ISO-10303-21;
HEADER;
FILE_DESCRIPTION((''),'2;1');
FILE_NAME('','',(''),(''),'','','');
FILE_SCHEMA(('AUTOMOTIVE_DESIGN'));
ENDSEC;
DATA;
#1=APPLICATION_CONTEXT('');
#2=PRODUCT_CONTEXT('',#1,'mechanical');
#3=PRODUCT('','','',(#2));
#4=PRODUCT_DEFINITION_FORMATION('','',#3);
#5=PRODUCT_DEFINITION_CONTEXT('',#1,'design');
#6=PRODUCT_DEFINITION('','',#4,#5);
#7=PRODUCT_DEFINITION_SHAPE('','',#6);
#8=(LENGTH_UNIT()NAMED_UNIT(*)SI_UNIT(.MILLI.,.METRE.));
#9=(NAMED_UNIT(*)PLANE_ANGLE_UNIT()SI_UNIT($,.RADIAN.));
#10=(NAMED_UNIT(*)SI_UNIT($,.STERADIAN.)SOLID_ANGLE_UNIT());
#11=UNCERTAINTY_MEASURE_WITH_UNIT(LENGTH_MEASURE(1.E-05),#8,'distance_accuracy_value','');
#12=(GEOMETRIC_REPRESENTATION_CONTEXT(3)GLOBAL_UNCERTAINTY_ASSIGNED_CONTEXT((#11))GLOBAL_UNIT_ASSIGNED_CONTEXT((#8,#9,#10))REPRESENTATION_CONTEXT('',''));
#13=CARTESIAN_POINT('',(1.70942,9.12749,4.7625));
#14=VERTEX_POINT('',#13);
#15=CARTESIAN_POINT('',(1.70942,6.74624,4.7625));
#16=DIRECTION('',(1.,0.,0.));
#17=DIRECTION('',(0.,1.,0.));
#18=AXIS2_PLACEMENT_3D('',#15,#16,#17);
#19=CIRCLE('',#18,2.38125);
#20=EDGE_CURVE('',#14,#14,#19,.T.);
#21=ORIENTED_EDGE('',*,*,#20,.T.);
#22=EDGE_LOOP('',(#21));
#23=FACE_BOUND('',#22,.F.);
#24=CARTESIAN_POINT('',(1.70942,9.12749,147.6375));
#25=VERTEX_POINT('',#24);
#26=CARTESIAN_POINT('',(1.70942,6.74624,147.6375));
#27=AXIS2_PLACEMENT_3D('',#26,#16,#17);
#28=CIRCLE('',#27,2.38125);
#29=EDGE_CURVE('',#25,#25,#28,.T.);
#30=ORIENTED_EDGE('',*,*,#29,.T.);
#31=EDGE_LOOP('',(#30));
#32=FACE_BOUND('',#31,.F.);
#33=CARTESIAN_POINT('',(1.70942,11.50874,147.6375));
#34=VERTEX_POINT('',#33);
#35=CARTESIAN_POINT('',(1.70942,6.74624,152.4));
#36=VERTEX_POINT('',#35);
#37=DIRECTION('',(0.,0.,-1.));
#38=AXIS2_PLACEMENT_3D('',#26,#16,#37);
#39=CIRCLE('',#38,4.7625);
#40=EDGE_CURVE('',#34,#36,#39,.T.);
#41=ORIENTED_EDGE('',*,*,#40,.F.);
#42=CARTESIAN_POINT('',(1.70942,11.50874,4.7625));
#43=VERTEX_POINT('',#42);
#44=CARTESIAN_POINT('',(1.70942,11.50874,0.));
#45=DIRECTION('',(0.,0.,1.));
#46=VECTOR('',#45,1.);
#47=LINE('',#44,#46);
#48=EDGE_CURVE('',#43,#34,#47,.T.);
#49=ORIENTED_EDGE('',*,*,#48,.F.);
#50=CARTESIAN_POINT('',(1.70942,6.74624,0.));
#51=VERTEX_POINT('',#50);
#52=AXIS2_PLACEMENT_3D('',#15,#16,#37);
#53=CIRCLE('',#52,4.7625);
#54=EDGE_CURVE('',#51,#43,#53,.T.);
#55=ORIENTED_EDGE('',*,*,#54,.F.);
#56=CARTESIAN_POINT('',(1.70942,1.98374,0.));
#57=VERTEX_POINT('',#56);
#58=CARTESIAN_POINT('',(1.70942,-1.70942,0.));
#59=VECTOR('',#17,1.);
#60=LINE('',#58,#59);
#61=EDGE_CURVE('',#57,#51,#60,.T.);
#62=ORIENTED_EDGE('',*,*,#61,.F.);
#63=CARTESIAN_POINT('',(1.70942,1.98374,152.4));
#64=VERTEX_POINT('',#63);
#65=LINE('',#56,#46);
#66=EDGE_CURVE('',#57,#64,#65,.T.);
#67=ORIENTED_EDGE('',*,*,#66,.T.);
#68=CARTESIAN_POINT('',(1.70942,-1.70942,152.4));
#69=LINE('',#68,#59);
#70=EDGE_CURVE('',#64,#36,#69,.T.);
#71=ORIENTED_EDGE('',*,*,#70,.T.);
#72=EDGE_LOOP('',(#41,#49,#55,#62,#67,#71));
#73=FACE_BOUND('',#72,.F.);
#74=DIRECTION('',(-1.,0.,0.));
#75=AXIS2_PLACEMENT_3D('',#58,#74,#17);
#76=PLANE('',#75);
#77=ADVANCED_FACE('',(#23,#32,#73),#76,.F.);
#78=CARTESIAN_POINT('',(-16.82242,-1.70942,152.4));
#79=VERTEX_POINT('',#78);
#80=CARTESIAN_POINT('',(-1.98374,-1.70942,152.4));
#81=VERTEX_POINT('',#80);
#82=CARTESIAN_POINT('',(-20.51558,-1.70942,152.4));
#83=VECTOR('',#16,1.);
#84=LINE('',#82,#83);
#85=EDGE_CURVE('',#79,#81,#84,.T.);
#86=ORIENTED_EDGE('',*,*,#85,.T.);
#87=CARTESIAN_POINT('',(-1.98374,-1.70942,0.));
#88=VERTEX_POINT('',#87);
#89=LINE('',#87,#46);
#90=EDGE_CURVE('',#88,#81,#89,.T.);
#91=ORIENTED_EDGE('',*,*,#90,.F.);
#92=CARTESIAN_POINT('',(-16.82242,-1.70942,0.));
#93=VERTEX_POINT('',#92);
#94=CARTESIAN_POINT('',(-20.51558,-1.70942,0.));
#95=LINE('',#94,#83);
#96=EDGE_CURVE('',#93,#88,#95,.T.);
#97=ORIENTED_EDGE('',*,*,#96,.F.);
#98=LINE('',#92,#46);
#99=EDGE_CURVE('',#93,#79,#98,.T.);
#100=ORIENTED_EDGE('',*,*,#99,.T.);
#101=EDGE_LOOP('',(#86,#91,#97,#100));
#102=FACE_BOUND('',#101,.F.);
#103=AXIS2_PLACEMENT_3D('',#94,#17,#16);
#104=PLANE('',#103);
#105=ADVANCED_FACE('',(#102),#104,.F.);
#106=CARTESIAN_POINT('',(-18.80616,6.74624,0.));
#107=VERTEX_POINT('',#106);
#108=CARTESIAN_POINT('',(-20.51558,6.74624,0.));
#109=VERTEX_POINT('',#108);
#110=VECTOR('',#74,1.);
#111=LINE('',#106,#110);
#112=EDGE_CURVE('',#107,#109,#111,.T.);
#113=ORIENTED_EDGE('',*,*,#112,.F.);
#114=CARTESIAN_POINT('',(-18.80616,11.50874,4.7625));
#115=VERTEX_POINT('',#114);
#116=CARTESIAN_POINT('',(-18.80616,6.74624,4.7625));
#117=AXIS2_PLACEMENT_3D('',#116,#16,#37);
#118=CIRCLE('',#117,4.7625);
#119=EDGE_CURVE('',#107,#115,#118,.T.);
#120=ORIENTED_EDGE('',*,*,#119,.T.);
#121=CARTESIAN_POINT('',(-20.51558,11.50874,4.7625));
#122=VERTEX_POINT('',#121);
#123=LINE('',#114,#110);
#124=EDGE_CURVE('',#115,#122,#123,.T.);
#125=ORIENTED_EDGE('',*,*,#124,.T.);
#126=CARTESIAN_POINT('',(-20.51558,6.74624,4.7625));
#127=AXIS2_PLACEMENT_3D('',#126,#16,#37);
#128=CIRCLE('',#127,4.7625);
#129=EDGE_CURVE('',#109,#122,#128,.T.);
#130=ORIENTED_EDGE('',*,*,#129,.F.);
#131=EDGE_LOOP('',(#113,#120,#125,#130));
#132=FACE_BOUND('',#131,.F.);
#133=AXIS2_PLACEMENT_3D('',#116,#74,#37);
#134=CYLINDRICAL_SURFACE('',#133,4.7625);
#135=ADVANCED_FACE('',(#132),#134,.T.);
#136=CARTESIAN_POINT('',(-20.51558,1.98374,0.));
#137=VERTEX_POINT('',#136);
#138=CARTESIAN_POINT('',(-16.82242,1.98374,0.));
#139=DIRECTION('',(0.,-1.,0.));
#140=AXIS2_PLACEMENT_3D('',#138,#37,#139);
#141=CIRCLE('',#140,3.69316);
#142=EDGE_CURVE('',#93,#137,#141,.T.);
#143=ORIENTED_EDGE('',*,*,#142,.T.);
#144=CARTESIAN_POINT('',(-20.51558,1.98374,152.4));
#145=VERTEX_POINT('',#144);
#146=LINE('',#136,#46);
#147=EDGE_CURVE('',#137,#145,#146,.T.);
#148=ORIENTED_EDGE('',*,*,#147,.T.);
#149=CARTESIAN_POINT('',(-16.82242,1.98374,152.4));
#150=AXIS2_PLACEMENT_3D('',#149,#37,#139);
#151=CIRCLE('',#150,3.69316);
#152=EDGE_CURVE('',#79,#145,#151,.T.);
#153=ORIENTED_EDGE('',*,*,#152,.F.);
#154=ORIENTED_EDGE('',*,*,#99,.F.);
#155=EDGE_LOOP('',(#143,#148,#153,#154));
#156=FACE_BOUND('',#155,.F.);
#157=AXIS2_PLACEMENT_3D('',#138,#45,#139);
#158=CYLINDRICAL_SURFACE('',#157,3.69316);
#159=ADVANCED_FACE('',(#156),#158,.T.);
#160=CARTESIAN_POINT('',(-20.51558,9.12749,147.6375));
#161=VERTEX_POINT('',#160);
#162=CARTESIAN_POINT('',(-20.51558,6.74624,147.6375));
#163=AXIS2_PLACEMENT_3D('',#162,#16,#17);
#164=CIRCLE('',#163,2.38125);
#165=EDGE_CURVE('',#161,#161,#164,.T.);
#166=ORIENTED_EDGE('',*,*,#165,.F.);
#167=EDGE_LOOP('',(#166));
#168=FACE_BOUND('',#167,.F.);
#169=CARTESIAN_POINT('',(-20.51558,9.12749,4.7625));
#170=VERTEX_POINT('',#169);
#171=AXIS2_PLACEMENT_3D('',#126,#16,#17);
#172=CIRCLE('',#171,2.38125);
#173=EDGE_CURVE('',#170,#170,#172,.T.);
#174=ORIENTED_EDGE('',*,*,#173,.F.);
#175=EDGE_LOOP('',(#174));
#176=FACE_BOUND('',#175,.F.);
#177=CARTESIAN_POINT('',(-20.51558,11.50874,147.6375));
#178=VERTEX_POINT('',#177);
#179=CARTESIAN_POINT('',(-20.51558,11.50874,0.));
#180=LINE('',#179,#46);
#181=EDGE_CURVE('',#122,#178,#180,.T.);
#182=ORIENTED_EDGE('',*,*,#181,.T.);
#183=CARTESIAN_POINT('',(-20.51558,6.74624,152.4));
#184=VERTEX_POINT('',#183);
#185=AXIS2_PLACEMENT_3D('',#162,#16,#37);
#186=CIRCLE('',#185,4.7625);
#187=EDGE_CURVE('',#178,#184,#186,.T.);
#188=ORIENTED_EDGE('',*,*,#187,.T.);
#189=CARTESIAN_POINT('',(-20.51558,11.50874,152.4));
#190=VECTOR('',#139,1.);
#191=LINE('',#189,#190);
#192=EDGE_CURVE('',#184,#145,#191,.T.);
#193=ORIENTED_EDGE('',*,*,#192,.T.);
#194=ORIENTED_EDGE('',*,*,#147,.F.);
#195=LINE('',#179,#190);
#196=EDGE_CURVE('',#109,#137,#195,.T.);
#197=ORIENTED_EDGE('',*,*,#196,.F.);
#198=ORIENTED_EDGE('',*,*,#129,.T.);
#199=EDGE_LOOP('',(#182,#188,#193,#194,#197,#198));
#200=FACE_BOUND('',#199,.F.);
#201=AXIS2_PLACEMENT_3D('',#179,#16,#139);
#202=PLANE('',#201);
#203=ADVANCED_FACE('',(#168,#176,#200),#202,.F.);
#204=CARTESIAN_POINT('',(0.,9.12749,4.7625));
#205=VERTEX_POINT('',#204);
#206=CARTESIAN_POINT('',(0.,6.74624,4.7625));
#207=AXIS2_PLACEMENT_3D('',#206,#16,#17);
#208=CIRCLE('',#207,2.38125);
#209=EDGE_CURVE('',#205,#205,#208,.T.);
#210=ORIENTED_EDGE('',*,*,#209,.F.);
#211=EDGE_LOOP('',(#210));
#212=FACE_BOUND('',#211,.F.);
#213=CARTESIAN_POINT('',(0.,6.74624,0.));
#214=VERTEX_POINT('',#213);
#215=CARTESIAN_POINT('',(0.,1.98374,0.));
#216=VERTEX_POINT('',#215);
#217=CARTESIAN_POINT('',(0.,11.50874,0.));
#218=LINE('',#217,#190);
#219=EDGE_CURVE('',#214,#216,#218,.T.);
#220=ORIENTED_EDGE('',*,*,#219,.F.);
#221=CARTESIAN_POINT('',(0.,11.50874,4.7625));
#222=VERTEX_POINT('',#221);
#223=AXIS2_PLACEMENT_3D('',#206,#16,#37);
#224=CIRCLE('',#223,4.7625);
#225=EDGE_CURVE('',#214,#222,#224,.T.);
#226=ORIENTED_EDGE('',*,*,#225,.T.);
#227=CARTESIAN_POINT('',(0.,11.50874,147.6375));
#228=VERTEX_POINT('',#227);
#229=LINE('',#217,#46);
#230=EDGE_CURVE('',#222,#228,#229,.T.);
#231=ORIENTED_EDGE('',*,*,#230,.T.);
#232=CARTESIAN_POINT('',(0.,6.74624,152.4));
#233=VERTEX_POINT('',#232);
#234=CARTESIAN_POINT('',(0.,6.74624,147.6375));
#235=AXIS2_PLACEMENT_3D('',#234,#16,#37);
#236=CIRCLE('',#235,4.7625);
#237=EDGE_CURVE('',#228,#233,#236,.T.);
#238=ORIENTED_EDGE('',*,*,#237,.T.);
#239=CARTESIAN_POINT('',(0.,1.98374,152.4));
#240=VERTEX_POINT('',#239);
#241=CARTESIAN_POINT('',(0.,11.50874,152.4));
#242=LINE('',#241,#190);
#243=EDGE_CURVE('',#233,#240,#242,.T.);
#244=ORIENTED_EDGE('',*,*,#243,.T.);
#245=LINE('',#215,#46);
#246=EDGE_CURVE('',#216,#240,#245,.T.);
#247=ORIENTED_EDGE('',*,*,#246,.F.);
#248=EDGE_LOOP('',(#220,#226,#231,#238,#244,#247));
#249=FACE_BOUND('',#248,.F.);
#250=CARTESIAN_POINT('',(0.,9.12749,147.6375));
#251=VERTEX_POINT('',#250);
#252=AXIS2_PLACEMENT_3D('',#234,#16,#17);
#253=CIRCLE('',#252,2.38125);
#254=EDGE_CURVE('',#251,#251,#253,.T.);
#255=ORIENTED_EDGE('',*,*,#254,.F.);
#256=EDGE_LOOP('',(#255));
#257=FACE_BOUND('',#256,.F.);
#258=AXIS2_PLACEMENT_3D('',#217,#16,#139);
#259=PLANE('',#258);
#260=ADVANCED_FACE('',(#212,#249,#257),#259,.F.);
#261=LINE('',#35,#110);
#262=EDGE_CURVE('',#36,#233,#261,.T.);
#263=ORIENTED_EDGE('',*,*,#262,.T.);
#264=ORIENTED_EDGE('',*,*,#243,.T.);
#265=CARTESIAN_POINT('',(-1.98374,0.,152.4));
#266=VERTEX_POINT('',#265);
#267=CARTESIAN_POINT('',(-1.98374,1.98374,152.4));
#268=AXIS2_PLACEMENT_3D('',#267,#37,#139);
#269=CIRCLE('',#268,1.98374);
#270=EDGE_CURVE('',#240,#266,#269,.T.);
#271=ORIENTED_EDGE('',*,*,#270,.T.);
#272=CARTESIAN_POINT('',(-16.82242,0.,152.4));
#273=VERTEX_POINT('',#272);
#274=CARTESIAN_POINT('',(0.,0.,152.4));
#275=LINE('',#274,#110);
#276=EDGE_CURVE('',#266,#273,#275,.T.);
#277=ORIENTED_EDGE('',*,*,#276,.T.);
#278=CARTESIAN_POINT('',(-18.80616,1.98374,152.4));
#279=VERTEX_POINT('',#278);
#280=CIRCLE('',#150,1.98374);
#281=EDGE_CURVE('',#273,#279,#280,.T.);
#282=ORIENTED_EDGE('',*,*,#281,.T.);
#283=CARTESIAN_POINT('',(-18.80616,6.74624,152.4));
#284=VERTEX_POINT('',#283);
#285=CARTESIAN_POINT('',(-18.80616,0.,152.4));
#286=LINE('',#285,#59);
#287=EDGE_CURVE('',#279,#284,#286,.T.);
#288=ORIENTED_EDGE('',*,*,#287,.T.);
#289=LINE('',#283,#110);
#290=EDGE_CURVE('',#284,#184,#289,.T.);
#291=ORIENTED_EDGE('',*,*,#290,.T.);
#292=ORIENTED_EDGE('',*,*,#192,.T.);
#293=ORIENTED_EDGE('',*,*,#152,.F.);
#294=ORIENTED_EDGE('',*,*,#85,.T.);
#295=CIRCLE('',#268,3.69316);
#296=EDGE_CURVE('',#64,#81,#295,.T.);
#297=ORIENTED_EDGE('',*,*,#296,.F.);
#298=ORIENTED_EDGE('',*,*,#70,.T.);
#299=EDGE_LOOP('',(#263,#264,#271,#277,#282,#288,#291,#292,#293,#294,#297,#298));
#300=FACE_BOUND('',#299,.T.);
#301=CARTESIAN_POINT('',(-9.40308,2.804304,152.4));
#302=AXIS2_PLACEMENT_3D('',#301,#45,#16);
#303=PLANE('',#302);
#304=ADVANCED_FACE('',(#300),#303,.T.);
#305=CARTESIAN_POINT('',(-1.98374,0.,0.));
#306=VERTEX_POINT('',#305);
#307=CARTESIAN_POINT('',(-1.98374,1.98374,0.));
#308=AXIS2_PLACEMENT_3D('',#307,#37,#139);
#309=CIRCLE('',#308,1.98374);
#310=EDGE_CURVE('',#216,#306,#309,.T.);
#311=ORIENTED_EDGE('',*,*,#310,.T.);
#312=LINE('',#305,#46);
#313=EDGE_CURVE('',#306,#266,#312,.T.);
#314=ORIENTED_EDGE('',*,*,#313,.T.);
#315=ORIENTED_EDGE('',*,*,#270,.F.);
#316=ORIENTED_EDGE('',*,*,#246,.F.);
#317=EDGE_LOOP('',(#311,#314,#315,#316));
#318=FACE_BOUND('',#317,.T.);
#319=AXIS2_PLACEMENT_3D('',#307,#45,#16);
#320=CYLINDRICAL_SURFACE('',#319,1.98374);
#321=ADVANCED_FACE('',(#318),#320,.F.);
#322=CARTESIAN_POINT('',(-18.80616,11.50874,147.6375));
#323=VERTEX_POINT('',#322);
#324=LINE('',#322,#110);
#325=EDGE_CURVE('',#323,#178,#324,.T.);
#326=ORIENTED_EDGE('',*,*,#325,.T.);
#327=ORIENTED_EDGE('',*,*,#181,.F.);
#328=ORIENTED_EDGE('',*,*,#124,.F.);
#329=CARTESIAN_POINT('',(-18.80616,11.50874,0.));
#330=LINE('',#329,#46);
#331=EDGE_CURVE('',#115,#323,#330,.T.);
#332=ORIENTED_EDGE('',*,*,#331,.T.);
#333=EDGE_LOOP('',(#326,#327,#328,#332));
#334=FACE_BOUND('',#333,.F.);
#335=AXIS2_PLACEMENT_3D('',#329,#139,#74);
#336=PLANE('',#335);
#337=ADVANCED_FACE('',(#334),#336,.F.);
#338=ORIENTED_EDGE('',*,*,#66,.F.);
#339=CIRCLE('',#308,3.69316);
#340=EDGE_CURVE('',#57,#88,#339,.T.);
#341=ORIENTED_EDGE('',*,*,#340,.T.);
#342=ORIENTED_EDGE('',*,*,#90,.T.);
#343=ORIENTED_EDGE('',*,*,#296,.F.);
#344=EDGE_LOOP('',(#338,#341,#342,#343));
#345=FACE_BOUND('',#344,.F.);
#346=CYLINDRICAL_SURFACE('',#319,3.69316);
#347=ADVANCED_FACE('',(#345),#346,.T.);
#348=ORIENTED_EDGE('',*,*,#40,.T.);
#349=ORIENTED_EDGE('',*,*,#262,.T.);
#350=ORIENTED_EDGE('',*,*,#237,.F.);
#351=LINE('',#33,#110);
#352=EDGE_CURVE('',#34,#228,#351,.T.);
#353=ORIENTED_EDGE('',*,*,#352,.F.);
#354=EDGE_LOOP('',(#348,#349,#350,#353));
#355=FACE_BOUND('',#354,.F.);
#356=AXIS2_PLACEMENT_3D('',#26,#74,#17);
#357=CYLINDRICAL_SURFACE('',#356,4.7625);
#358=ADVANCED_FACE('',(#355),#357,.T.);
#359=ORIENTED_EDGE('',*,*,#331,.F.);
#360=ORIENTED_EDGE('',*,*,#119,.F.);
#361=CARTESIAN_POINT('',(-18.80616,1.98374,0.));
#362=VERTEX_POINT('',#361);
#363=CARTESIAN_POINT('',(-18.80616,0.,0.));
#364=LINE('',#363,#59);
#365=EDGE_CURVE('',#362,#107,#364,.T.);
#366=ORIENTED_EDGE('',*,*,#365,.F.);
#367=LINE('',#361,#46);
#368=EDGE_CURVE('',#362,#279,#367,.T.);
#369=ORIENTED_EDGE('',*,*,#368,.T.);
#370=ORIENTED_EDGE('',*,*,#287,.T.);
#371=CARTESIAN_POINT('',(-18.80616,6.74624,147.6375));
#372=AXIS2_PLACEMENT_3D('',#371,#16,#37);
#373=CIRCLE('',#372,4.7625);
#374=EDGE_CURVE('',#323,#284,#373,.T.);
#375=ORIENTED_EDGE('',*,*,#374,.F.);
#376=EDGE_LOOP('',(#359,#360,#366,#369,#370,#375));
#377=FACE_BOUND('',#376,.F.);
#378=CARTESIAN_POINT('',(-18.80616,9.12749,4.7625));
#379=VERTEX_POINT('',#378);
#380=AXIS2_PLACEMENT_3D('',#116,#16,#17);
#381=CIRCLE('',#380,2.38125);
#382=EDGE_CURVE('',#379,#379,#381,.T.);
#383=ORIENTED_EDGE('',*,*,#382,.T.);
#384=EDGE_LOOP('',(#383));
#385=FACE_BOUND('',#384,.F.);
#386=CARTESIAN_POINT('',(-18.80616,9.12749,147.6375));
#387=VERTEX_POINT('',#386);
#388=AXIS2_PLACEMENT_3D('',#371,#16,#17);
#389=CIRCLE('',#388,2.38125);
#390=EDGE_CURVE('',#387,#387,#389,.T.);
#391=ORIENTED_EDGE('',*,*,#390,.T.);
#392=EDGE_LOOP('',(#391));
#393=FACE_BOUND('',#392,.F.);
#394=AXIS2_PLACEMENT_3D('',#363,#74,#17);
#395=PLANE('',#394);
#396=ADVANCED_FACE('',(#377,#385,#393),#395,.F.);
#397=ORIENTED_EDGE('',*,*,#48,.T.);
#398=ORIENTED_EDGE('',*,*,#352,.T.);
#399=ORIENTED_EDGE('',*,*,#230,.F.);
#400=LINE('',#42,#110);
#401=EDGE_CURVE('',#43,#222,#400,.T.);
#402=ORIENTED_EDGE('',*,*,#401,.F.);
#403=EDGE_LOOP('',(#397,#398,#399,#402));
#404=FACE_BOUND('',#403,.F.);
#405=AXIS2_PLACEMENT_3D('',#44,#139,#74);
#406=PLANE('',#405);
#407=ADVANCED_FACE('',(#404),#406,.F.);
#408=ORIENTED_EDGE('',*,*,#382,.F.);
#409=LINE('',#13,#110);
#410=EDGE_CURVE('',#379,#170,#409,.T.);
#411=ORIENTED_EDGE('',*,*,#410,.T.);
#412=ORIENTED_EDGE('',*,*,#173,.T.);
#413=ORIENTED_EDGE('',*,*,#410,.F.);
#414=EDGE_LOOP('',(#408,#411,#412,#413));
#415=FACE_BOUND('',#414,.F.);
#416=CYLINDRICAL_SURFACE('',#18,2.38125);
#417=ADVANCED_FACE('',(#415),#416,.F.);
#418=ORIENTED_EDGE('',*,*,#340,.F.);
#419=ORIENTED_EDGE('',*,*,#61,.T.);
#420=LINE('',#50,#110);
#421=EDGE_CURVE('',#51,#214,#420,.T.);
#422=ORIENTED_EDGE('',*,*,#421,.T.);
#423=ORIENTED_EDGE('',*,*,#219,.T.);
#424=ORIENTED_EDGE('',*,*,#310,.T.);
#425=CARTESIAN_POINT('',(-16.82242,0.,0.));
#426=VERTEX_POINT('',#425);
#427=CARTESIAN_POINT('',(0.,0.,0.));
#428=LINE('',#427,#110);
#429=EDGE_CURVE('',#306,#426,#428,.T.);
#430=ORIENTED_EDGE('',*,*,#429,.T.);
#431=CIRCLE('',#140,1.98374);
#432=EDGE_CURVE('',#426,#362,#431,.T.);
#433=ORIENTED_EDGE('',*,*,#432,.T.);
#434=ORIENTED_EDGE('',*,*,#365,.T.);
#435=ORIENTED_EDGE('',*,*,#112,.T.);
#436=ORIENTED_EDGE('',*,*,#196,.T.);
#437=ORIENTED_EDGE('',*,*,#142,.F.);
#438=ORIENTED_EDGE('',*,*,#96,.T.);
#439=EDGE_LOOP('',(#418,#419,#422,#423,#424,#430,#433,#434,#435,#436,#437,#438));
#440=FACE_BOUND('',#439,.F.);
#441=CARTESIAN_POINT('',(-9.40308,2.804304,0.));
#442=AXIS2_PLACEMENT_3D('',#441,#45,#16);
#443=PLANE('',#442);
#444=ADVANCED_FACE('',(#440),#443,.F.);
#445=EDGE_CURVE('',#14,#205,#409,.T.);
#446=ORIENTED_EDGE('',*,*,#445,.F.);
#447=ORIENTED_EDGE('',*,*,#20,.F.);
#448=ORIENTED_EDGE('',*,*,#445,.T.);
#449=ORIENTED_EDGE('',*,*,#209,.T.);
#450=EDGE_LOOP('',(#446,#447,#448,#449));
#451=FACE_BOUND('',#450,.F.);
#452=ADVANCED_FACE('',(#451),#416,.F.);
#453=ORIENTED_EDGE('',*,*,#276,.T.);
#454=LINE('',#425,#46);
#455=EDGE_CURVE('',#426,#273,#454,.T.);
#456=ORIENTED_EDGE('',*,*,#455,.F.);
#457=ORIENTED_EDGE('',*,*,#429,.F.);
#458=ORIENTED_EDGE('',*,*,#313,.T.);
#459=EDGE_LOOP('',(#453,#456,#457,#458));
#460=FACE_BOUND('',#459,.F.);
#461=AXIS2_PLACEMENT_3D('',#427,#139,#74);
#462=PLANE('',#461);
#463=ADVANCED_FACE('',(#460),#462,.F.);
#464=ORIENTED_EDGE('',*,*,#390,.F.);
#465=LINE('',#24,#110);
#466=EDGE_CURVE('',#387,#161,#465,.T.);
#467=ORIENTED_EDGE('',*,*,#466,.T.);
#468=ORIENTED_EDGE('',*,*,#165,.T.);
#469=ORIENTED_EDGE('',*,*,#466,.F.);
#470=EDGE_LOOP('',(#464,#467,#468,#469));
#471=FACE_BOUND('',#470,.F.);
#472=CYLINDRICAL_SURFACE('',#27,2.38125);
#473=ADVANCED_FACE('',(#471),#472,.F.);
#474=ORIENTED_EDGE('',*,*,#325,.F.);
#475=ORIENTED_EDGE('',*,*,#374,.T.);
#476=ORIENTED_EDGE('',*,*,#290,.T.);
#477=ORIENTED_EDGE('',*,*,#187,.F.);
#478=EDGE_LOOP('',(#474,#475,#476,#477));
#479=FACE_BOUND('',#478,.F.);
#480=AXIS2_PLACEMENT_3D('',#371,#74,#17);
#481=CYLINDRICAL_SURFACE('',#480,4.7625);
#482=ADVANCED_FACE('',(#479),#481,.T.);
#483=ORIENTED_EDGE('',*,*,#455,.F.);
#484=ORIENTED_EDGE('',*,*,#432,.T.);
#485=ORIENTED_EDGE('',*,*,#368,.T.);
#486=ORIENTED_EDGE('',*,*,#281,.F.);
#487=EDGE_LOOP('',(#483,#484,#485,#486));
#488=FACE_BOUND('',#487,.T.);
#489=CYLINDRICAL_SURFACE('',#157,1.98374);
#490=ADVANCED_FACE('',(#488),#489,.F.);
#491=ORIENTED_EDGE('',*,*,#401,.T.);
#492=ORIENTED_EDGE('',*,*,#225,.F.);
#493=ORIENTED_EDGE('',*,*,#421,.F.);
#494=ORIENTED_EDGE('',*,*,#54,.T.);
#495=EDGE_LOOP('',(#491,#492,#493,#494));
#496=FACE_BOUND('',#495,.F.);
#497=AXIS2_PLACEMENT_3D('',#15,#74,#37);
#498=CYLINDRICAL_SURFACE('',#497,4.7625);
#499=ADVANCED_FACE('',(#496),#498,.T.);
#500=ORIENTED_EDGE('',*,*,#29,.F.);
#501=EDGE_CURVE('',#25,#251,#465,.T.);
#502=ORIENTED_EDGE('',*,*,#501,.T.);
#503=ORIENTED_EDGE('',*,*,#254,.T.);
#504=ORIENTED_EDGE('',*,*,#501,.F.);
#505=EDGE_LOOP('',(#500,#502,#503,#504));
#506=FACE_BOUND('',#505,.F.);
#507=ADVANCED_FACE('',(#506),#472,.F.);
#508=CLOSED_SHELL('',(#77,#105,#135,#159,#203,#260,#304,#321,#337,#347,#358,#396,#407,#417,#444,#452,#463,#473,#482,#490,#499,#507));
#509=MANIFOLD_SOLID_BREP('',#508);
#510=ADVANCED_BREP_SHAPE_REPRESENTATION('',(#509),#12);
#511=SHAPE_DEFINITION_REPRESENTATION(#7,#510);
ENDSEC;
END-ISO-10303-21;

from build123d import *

# Parameters (mm, degrees)
F1_DEPTH = 152.4
F2_R     = 1.98374
F3_R     = 3.69316
F4_R     = 4.7625
F5_R     = 2.38125
F6_DEPTH = 22.225


with BuildPart() as f1:
    # F0 (on Top) → F1 (new body)
    with BuildSketch(Plane.XY):
        Polygon((0, 11.50874), (0, 0), (-18.80616, 0), (-18.80616, 11.50874), (-20.51558, 11.50874), (-20.51558, -1.70942), (1.70942, -1.70942), (1.70942, 11.50874), align=None)
    extrude(amount=F1_DEPTH)

    # F2
    f2_edges = [f1.edges().sort_by_distance(p)[0] for p in [
        (0, 0, 76.2),
        (-18.80616, 0, 76.2),
    ]]
    fillet(f2_edges, radius=F2_R)

    # F3
    f3_edges = [f1.edges().sort_by_distance(p)[0] for p in [
        (1.70942, -1.70942, 76.2),
        (-20.51558, -1.70942, 76.2),
    ]]
    fillet(f3_edges, radius=F3_R)

    # F4
    f4_edges = [f1.edges().sort_by_distance(p)[0] for p in [
        (0.85471, 11.50874, 152.4),
        (-19.66087, 11.50874, 152.4),
        (-19.66087, 11.50874, 0),
        (0.85471, 11.50874, 0),
    ]]
    fillet(f4_edges, radius=F4_R)

    # F5 (on face) → F6 (cut, through all)
    with BuildSketch(Plane.YZ.offset(1.70942)):
        with Locations((6.74624, 4.7625)):
            Circle(F5_R)
        with Locations((6.74624, 147.6375)):
            Circle(F5_R)
    extrude(amount=-F6_DEPTH, mode=Mode.SUBTRACT)


solid = f1.part
